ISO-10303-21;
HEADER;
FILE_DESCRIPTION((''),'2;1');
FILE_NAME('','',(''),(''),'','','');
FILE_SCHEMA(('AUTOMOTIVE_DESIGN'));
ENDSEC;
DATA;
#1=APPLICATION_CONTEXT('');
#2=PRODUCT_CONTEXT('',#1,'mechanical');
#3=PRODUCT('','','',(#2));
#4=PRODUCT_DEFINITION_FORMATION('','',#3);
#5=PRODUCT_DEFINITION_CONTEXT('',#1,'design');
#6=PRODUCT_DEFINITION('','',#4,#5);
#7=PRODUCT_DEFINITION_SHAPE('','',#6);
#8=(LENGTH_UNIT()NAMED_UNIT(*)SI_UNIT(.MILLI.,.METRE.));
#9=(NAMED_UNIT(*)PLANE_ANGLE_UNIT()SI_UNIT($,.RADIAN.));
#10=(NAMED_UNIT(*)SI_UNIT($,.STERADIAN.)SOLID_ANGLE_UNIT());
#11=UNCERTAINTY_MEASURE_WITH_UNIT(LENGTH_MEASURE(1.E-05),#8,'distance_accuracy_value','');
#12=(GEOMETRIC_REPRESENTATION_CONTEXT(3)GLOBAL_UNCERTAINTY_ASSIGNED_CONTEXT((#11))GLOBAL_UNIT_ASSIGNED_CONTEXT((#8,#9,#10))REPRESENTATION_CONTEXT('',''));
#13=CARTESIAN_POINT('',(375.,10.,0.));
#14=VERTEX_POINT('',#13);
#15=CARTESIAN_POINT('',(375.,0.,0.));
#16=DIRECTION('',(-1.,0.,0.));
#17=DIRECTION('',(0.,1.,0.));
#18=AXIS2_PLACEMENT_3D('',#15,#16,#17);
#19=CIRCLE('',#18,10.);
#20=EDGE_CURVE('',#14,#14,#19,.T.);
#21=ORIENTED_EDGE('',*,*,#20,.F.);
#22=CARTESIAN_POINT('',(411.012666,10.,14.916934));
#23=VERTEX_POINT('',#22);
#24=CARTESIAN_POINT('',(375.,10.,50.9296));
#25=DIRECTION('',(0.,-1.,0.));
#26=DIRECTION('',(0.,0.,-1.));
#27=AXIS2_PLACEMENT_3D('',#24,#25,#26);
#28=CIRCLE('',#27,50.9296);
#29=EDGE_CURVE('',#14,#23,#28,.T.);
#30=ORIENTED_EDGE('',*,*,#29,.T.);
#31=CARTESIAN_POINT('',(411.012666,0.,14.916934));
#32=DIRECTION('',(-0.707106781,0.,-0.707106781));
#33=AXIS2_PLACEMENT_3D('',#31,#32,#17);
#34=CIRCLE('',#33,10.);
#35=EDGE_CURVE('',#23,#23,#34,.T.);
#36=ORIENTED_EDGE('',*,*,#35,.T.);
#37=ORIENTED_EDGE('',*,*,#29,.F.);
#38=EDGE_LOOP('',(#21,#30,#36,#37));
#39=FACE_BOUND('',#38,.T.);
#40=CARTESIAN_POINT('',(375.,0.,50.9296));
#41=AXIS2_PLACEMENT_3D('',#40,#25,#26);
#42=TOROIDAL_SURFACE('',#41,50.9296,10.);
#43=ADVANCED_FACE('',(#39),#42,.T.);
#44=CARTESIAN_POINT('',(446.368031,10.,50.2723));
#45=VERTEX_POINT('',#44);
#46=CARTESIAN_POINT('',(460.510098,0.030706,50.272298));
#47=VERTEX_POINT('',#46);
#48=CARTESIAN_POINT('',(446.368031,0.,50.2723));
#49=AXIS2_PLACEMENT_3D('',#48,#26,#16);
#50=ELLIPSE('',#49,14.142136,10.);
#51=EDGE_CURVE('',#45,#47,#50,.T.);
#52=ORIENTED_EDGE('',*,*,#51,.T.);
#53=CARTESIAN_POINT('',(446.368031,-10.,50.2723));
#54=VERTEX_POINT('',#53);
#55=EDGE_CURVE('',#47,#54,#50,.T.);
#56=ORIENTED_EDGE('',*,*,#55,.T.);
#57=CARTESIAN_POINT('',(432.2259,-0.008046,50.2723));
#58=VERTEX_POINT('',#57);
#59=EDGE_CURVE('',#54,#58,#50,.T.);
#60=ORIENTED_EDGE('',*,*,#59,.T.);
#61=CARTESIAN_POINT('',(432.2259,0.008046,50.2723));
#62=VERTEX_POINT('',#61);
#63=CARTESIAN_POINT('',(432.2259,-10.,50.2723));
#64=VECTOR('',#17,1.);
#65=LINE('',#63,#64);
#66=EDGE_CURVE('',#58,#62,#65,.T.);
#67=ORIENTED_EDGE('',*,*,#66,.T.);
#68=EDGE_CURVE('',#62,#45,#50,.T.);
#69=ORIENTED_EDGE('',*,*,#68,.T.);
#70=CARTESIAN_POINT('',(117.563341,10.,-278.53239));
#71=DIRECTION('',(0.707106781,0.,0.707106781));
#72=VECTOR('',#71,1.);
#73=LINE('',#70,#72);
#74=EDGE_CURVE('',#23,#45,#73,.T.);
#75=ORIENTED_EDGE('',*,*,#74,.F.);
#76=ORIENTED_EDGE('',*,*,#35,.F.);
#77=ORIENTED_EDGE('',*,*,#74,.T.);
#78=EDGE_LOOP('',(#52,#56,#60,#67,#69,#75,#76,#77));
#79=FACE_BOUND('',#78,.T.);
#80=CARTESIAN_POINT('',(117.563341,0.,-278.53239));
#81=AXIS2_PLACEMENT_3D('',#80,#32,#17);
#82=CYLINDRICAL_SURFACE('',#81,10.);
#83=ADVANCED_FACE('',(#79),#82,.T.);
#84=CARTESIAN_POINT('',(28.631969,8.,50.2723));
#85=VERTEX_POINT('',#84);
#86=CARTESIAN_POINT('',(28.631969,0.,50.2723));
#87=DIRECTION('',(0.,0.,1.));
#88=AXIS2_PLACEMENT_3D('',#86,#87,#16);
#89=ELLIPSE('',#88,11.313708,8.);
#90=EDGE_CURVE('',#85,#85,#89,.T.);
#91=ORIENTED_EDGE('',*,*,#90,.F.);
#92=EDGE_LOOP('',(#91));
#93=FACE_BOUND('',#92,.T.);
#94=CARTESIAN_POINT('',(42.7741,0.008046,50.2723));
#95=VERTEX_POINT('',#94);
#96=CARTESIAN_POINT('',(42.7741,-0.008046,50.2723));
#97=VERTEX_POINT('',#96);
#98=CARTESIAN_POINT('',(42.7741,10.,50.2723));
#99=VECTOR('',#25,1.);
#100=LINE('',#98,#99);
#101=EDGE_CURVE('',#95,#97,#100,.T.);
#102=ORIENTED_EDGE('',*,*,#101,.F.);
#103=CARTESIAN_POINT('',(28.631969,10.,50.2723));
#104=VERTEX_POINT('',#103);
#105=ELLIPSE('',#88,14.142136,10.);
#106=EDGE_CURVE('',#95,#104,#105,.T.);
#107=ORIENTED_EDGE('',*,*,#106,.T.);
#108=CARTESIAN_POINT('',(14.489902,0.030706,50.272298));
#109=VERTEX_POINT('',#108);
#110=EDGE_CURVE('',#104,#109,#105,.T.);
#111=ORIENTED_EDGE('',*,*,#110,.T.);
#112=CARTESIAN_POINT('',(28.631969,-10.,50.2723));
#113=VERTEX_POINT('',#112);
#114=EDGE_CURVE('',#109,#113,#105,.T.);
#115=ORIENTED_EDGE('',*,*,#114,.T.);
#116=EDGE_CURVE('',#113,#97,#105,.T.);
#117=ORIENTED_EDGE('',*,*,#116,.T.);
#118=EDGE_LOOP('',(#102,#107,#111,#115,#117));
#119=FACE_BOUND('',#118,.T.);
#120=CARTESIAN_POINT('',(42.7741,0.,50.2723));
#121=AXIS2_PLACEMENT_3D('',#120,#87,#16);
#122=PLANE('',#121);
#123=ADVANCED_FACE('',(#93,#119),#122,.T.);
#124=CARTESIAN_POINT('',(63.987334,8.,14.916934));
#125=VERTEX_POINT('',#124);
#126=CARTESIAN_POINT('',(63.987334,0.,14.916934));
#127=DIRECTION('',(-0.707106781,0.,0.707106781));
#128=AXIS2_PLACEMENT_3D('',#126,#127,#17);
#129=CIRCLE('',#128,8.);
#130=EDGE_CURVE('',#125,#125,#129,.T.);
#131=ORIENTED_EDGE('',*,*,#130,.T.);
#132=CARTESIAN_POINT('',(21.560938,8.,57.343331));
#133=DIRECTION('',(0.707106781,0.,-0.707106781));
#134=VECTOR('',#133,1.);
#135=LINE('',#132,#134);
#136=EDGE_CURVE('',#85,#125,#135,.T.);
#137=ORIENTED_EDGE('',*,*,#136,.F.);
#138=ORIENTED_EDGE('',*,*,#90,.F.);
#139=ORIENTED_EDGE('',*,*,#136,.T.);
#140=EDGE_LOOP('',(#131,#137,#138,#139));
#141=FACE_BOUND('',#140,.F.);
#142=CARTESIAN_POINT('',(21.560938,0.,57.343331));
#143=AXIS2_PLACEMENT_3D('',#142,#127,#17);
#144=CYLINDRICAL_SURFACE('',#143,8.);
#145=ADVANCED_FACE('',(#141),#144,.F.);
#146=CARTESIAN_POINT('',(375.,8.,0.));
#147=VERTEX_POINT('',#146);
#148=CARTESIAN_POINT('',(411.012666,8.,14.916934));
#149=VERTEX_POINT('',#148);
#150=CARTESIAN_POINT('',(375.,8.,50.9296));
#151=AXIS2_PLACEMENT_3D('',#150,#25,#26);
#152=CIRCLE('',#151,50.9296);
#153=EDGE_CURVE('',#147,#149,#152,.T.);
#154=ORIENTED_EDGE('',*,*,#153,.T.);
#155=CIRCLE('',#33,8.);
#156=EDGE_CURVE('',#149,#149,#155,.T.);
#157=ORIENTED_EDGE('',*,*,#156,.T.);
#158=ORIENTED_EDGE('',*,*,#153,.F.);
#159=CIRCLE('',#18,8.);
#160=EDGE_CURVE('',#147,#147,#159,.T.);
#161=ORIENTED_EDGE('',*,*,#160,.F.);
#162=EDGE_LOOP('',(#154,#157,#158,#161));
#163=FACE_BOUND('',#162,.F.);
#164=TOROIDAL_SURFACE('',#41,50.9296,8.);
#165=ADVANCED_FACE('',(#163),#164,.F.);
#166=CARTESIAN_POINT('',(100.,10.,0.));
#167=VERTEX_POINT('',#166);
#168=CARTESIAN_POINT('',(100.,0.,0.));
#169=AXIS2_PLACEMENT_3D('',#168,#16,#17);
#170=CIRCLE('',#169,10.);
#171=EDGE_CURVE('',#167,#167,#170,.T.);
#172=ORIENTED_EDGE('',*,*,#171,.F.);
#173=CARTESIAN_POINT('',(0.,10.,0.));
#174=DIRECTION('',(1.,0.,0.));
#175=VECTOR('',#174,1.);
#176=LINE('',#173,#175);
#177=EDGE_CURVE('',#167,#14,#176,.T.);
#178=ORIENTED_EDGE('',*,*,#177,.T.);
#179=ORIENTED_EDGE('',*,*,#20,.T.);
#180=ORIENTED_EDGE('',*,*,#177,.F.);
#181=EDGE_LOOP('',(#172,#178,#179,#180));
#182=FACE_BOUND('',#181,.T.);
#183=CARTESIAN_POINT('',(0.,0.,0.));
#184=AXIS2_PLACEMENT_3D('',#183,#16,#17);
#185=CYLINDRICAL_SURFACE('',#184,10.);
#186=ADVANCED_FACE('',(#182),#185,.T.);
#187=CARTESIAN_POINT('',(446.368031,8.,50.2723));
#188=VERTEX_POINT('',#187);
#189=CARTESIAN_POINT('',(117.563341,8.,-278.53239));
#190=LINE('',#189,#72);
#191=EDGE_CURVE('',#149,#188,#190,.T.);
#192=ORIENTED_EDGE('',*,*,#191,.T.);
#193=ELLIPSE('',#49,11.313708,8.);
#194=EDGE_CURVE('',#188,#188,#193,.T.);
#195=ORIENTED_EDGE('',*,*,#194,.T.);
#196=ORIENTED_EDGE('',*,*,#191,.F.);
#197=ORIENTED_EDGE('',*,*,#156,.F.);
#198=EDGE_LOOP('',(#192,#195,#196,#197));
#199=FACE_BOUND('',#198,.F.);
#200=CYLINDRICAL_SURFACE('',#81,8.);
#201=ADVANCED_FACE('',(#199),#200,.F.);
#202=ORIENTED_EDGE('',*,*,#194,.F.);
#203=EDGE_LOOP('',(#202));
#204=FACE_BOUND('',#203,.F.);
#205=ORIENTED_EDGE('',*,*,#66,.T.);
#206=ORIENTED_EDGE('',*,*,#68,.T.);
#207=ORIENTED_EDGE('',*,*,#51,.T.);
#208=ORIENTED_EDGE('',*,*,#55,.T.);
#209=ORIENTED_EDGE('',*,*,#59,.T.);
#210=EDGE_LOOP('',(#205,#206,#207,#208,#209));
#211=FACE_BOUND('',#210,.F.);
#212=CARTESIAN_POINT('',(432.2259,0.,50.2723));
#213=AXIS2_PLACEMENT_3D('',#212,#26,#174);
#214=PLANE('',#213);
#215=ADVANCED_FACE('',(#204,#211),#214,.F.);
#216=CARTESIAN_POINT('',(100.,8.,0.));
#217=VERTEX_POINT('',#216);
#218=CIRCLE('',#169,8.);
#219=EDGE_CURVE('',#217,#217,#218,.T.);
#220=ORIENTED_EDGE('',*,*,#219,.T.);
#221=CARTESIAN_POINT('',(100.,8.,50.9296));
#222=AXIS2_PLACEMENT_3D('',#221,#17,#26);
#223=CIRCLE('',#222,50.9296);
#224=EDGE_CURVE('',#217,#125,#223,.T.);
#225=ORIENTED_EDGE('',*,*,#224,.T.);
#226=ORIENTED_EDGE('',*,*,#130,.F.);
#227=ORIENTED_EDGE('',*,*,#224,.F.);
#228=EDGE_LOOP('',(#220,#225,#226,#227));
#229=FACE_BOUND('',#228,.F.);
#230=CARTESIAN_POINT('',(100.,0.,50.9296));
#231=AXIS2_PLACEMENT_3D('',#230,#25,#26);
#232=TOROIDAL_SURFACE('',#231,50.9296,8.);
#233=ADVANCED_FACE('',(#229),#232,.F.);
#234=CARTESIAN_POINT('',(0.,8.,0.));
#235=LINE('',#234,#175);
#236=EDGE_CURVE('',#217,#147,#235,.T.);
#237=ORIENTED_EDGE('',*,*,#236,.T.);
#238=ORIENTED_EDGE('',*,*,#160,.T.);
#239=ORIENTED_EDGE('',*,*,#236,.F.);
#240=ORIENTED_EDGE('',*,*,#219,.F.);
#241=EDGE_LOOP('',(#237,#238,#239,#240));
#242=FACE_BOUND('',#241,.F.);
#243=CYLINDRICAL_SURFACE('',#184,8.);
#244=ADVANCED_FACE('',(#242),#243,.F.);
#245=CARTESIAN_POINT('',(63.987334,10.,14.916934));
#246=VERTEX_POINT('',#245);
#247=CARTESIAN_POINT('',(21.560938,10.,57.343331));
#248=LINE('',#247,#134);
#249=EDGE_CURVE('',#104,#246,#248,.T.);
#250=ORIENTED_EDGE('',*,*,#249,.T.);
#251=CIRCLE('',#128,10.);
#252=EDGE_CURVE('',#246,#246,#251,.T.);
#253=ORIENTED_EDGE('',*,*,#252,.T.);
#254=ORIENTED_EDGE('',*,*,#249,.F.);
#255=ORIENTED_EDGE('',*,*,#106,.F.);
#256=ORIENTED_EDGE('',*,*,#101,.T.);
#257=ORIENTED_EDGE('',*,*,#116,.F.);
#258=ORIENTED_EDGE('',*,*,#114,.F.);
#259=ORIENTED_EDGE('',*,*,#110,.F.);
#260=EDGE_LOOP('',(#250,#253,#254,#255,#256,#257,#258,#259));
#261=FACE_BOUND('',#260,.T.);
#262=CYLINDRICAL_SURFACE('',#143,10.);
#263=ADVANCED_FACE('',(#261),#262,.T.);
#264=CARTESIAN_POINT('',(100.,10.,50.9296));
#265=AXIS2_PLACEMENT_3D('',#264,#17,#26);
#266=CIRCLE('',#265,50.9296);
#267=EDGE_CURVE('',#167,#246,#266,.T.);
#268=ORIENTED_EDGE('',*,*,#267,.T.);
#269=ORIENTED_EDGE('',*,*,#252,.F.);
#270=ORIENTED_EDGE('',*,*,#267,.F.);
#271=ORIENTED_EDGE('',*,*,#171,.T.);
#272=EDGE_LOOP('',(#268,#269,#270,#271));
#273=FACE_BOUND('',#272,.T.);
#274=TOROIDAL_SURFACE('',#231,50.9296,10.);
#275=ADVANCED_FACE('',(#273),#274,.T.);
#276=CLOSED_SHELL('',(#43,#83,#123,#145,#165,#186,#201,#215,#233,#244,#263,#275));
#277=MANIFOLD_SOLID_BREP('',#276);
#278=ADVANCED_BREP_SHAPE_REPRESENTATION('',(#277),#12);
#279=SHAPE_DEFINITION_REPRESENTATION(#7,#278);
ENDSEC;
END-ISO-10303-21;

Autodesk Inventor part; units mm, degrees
ref_plane "YZ Plane" through (0, 0, 0) normal (1, 0, 0) x (0, 1, 0)
ref_plane "XZ Plane" through (0, 0, 0) normal (0, 1, 0) x (-1, 0, 0)
ref_plane "XY Plane" through (0, 0, 0) normal (0, 0, 1) x (1, 0, 0)
sketch "Szkic1" plane through (0, 0, 0) normal (1, 0, 0) x (0, 1, 0)
  circle A0 centre (0, 0) radius 10
  dimension "d0" = 20
extrude "Wyciągnięcie proste1" add sketch "Szkic1" along normal blind 475
shell "Skorupa1" thickness 2 removed faces 2 at (475, -1.182, 3.1167) at (0, -1.182, 3.1167)
sketch "Szkic2" plane through (0, 0, 0) normal (0, 0, 1) x (1, 0, 0)
  line L0 (100, 28.3712) -> (100, -25.6691)
  line L1 (0, 10) -> (0, -10) projected
  point P0 (0, 0)
  dimension "d4" = 100
bend part "Gięcie części1" radius 50.9296 angle 45 line through (100, 28.3712, 0) along (0, -1, 0) centre toward (0, 0, 1) moving side (-1, 0, 0) both sides no
sketch "Szkic3" plane through (0, 0, 0) normal (0, 0, 1) x (1, 0, 0)
  line L0 (375, 37.2706) -> (375, -31.4113)
  line L1 (475, -10) -> (475, 10) projected
  point P0 (0, 0)
  dimension "d7" = 100
bend part "Gięcie części2" radius 50.9296 angle 45 line through (375, 37.2706, 0) along (0, -1, 0) centre toward (0, 0, 1) moving side (1, 0, 0) both sides no
sketch "Szkic4" plane through (0, 0, 0) normal (0, 1, 0) x (-1, 0, 0)
  line L0 (-446.368, 64.4144) -> (-460.5101, 50.2723) construction
  line L1 (-403.9416, 21.988) -> (-446.368, 64.4144) construction
  line L2 (-418.0837, 7.8459) -> (-460.5101, 50.2723) construction
  line L3 (-460.5101, 50.2723) -> (-446.368, 64.4144)
  line L4 (-446.368, 64.4144) -> (-432.2259, 50.2723)
  line L5 (-432.2259, 50.2723) -> (-460.5101, 50.2723)
  line L6 (-14.4899, 50.2723) -> (-28.632, 64.4144) construction
  line L7 (-28.632, 64.4144) -> (-71.0584, 21.988) construction
  line L8 (-14.4899, 50.2723) -> (-56.9163, 7.8459) construction
  line L9 (-14.4899, 50.2723) -> (-28.632, 64.4144)
  line L10 (-28.632, 64.4144) -> (-42.7741, 50.2723)
  line L11 (-42.7741, 50.2723) -> (-14.4899, 50.2723)
  point P0 (0, 0)
extrude "Wyciągnięcie proste2" cut sketch "Szkic4" along normal mid plane 20
equation "\"PromieńGięcia\" = Grubość"
equation "\"SzerokośćGięciaPodcięcia\" = Grubość"
equation "\"GłębokośćGięciaPodcięcia\" = 0.5 * Grubość"
equation "\"RozmiarPodcięciaNarożnika\" = 4 * Grubość"
equation "\"MinimalnaPozostałość\" = 2 * Grubość"
equation "\"PromieńPrzejścia\" = PromieńGięcia"
equation "\"Rozmiar_promienia_Jacobiego\" = PromieńGięcia"
equation "\"Wielk_odstępu\" = Grubość"
equation "\"Grubość\" = 0.5"
properties part number "Rura_barierka_oparcia" material "Aluminium AW-7020"
